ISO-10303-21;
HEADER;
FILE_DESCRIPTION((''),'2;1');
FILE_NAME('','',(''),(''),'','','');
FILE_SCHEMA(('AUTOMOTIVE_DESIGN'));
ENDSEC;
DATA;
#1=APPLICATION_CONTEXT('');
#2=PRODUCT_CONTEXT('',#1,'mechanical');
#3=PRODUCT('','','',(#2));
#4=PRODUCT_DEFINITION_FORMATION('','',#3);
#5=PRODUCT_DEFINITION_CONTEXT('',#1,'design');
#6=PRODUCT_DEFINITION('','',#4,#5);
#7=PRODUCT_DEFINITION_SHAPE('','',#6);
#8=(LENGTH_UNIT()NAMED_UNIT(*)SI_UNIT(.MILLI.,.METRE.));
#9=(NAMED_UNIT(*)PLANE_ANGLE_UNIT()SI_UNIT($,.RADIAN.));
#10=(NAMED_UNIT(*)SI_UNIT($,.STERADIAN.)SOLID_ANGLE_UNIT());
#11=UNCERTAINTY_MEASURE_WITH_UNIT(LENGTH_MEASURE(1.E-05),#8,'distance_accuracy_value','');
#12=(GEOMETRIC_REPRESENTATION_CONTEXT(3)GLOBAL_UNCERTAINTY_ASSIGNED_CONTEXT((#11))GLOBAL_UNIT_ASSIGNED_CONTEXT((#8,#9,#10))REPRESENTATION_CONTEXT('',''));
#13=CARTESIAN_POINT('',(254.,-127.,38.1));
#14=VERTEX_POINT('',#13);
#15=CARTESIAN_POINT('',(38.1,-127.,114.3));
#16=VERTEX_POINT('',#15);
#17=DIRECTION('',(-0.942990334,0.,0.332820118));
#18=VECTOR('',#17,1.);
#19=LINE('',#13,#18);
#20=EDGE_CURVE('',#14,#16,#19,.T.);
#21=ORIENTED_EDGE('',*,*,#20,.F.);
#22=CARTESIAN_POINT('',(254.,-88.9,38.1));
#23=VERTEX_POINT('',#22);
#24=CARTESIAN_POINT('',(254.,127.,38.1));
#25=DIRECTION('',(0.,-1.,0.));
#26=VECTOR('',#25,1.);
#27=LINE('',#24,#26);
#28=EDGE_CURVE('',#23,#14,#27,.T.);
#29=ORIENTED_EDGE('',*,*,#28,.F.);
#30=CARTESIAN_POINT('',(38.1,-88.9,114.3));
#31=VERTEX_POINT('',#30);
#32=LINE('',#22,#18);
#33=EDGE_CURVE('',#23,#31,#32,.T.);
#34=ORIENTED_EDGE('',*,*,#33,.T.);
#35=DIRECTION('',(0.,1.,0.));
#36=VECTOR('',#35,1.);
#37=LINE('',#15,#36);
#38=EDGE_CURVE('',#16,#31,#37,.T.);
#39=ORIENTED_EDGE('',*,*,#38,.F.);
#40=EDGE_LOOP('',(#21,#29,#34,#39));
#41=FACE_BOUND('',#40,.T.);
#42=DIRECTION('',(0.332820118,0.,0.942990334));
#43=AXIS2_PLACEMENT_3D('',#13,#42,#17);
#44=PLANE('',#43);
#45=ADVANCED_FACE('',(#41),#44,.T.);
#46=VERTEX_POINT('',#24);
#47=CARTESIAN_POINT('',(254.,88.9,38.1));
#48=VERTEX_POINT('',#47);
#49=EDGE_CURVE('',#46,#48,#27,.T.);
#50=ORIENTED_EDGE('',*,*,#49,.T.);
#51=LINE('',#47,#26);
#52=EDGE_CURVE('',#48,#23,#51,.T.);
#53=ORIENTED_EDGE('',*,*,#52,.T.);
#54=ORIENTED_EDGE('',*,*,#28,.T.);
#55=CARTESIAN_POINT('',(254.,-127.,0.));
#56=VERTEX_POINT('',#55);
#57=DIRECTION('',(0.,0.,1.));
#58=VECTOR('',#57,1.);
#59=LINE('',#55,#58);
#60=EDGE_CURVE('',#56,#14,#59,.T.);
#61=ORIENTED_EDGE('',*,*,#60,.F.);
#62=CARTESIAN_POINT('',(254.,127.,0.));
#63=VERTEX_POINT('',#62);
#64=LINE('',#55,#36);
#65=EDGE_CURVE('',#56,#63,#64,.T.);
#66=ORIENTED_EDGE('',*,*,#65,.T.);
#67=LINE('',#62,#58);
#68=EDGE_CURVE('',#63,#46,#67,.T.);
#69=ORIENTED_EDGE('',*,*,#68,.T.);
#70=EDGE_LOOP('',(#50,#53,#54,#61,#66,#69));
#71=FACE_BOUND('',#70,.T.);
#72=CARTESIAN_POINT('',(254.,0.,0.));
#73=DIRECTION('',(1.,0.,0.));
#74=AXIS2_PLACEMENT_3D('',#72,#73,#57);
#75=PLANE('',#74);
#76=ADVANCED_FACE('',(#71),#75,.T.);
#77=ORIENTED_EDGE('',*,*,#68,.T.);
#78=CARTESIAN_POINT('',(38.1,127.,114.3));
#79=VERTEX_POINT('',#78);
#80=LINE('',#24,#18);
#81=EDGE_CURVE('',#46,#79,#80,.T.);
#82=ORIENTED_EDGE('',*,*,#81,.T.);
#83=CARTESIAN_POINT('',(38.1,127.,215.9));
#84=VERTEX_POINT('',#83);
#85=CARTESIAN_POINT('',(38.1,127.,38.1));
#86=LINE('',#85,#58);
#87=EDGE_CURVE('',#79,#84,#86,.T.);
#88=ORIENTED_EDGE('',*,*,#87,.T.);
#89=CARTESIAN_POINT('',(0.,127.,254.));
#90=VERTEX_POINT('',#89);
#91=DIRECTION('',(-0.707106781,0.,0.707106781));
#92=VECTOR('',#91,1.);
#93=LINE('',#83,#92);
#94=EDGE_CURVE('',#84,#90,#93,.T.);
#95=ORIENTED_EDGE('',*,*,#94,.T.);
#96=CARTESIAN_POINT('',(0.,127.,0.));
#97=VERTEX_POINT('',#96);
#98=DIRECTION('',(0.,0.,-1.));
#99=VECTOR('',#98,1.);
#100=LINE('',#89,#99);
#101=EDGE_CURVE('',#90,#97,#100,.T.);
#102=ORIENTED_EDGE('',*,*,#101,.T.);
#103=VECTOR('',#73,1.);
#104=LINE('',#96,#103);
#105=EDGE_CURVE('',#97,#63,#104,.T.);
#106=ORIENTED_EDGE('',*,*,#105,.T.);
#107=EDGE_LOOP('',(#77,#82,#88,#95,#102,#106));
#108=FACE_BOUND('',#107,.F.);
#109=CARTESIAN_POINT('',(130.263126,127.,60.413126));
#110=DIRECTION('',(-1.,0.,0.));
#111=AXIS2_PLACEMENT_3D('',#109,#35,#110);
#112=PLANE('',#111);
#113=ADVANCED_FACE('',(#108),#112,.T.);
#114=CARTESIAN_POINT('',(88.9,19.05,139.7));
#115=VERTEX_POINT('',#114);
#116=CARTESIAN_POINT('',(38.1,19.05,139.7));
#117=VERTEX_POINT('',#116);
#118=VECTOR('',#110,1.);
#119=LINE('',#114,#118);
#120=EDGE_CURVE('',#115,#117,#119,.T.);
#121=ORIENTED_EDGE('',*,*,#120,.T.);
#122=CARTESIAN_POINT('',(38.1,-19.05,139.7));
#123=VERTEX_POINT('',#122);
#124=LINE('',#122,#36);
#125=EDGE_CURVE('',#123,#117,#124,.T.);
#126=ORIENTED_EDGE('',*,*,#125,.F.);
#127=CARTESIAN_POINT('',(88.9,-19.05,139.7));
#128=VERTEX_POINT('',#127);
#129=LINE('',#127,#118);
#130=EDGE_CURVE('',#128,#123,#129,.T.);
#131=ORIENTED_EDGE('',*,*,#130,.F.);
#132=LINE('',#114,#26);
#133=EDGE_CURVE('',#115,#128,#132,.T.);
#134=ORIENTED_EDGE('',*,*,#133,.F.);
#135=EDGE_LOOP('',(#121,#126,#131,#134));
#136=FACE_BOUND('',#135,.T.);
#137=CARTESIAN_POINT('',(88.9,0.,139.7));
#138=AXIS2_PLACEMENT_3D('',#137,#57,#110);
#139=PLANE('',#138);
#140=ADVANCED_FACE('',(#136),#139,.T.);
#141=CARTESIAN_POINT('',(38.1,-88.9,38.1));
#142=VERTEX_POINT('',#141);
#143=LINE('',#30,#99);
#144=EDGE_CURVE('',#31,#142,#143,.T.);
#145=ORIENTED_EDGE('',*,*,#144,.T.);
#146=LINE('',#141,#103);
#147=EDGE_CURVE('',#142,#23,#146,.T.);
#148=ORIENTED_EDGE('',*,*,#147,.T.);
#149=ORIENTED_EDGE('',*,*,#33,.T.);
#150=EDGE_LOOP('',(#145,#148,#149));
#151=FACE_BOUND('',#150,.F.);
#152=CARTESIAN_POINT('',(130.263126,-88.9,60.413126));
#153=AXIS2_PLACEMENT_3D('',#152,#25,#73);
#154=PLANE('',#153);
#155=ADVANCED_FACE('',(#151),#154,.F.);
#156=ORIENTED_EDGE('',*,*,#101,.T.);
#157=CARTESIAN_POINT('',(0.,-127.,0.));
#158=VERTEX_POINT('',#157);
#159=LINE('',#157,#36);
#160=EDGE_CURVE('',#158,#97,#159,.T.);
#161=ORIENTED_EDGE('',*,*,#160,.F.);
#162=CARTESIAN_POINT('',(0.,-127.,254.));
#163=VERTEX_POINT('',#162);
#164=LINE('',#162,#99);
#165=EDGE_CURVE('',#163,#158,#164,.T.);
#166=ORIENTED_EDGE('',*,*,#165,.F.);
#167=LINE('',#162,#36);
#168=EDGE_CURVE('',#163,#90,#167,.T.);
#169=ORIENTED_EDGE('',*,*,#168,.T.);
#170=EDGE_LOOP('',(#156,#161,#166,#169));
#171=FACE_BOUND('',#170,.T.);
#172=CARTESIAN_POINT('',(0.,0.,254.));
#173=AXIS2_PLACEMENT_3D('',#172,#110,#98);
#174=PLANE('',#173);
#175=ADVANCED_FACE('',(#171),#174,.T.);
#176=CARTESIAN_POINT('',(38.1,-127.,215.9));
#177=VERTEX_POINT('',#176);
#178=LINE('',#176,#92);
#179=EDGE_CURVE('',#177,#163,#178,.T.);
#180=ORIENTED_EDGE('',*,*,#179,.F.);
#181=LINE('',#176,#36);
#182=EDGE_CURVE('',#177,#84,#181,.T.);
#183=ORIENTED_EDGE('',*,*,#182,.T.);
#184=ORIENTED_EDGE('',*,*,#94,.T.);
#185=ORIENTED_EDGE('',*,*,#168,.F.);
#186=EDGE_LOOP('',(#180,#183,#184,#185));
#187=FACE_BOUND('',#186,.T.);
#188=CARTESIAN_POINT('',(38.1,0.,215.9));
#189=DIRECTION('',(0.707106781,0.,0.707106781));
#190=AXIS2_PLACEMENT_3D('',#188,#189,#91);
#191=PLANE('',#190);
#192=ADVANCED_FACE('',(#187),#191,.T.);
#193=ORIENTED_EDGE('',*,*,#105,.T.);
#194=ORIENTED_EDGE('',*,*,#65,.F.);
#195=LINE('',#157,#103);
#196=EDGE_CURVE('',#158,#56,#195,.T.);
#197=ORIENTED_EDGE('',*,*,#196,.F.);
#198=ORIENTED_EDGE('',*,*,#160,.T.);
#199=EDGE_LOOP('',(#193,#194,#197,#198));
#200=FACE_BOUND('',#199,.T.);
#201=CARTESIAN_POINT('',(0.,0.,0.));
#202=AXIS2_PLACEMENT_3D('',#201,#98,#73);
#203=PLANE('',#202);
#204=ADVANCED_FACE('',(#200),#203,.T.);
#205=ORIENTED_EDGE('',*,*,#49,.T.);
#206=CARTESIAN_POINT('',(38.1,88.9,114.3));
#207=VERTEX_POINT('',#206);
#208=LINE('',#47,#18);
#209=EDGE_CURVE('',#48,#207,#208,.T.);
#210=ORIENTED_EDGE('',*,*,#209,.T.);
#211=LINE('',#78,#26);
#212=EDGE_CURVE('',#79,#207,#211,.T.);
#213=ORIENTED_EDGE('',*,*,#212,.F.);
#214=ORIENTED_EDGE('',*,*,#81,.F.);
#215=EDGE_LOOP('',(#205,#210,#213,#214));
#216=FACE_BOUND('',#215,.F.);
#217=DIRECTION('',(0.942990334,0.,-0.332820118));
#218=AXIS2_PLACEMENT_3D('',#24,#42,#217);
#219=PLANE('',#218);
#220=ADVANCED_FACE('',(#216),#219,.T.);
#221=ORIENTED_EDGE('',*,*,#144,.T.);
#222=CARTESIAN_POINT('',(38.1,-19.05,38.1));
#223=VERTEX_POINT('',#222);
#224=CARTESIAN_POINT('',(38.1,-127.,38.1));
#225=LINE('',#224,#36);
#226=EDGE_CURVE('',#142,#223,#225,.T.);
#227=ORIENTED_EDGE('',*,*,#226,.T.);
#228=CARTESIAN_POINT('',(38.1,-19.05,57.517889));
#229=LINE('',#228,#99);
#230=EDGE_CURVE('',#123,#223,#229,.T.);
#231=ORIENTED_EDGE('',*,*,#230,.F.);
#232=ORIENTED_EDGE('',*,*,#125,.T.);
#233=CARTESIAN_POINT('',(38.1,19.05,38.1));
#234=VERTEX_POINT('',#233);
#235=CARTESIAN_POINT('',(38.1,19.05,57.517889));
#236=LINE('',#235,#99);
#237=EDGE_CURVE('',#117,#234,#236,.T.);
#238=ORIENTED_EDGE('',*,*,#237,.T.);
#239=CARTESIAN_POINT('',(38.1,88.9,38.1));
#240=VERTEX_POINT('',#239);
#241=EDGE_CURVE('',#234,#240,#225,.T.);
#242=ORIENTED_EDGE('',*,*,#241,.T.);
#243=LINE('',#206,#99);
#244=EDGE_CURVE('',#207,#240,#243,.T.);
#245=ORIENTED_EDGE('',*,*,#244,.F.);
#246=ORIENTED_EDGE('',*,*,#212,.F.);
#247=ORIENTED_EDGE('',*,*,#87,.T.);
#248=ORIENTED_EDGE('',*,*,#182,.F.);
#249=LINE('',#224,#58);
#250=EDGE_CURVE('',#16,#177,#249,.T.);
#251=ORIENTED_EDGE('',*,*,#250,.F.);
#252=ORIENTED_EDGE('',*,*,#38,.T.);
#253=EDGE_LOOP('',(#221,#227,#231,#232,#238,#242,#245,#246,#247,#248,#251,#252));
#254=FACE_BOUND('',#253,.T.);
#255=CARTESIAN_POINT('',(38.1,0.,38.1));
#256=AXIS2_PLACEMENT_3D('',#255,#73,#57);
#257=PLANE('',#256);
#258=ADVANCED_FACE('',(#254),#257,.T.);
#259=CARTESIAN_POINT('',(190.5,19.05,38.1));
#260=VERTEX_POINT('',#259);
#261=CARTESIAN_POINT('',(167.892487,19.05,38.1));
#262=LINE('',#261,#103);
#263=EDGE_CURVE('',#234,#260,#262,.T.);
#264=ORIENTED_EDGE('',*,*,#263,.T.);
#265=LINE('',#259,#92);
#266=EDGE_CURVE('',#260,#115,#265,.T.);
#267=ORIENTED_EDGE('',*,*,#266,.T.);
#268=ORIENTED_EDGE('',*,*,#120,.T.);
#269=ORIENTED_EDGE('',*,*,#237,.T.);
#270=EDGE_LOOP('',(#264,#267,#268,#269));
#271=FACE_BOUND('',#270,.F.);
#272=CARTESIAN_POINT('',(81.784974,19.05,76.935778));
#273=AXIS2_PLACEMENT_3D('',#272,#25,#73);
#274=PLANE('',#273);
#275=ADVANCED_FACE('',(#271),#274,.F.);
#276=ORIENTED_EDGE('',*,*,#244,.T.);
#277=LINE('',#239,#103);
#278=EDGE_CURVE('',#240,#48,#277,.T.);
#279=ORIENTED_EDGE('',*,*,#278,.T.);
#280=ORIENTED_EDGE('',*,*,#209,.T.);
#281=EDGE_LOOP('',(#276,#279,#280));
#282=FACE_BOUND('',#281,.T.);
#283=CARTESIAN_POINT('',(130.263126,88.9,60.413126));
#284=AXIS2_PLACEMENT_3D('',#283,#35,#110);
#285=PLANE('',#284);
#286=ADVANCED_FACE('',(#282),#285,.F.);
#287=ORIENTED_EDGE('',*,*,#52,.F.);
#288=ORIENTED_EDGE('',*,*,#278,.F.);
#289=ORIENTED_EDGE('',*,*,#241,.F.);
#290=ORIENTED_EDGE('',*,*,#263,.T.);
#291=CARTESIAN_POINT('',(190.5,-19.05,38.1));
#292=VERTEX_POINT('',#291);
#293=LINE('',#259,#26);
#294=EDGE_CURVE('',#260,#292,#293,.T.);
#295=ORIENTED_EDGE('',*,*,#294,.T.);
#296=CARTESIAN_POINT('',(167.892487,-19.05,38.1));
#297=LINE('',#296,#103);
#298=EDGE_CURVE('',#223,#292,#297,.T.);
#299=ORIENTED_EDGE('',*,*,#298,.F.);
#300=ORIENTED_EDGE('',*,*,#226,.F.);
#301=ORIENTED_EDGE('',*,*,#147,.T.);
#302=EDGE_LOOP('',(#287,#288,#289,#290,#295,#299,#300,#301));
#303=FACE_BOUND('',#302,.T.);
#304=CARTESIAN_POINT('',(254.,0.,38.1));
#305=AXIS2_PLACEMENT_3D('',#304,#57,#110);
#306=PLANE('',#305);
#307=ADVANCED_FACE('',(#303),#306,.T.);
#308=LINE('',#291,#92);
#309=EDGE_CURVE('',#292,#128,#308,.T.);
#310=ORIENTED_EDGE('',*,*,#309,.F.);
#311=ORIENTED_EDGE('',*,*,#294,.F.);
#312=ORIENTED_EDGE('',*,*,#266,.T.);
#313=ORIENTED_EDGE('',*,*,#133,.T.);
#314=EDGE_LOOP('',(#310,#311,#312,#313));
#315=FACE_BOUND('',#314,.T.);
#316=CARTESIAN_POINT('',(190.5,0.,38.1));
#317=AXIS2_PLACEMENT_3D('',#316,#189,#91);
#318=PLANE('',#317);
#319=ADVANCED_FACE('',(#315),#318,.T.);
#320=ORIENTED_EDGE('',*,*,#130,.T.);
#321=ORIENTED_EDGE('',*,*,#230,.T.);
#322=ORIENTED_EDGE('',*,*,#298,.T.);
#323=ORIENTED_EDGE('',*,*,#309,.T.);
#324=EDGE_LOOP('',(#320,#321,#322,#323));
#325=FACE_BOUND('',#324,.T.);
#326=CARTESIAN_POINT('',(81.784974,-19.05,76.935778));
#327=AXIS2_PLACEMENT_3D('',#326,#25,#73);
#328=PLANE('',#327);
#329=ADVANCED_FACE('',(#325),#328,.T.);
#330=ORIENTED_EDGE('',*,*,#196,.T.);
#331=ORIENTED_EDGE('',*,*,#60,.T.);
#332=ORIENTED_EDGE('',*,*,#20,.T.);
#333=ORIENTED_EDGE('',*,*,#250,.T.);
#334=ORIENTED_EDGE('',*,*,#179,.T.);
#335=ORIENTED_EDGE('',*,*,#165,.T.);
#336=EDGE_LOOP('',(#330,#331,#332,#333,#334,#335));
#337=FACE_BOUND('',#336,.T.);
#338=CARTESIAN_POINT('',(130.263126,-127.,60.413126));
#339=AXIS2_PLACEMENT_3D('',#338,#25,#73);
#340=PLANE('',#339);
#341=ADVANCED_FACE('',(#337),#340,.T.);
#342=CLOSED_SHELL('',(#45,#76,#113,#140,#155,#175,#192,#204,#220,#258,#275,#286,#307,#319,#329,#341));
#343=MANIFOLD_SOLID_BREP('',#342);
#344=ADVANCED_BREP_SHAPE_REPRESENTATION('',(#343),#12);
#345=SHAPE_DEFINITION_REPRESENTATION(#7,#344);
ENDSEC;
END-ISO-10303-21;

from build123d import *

# Parameters (mm, degrees)
F1_DEPTH = 127
F3_DEPTH = 38.1
F4_DEPTH = 19.05


# Not quite as in the source:
# - a pattern or mirror of a feature is missing from the dataset's text; its kind, count and spacing are read off the source's solid


with BuildPart() as f1:
    # F0 (on Front) → F1 (new body, symmetric)
    with BuildSketch(Plane.XZ):
        Polygon((0, 254), (0, 0), (254, 0), (254, 38.1), (190.5, 38.1), (38.1, 38.1), (38.1, 139.7), (38.1, 215.9), align=None)
    extrude(amount=F1_DEPTH, both=True)

    # F2 (on face) → F3 (join)
    with BuildSketch(Plane.XZ.offset(127)):
        Polygon((254, 38.1), (38.1, 114.3), (38.1, 38.1), align=None)
    f3 = extrude(amount=-F3_DEPTH)

    # F3_copies: F3 across plane
    add(f3.mirror(Plane.ZX))

    # F0 (on Front) → F4 (join, symmetric)
    with BuildSketch(Plane.XZ):
        Polygon((0, 254), (0, 0), (254, 0), (254, 38.1), (190.5, 38.1), (38.1, 38.1), (38.1, 139.7), (38.1, 215.9), align=None)
        Polygon((38.1, 38.1), (190.5, 38.1), (88.9, 139.7), (38.1, 139.7), align=None)
    extrude(amount=F4_DEPTH, both=True)


solid = f1.part
